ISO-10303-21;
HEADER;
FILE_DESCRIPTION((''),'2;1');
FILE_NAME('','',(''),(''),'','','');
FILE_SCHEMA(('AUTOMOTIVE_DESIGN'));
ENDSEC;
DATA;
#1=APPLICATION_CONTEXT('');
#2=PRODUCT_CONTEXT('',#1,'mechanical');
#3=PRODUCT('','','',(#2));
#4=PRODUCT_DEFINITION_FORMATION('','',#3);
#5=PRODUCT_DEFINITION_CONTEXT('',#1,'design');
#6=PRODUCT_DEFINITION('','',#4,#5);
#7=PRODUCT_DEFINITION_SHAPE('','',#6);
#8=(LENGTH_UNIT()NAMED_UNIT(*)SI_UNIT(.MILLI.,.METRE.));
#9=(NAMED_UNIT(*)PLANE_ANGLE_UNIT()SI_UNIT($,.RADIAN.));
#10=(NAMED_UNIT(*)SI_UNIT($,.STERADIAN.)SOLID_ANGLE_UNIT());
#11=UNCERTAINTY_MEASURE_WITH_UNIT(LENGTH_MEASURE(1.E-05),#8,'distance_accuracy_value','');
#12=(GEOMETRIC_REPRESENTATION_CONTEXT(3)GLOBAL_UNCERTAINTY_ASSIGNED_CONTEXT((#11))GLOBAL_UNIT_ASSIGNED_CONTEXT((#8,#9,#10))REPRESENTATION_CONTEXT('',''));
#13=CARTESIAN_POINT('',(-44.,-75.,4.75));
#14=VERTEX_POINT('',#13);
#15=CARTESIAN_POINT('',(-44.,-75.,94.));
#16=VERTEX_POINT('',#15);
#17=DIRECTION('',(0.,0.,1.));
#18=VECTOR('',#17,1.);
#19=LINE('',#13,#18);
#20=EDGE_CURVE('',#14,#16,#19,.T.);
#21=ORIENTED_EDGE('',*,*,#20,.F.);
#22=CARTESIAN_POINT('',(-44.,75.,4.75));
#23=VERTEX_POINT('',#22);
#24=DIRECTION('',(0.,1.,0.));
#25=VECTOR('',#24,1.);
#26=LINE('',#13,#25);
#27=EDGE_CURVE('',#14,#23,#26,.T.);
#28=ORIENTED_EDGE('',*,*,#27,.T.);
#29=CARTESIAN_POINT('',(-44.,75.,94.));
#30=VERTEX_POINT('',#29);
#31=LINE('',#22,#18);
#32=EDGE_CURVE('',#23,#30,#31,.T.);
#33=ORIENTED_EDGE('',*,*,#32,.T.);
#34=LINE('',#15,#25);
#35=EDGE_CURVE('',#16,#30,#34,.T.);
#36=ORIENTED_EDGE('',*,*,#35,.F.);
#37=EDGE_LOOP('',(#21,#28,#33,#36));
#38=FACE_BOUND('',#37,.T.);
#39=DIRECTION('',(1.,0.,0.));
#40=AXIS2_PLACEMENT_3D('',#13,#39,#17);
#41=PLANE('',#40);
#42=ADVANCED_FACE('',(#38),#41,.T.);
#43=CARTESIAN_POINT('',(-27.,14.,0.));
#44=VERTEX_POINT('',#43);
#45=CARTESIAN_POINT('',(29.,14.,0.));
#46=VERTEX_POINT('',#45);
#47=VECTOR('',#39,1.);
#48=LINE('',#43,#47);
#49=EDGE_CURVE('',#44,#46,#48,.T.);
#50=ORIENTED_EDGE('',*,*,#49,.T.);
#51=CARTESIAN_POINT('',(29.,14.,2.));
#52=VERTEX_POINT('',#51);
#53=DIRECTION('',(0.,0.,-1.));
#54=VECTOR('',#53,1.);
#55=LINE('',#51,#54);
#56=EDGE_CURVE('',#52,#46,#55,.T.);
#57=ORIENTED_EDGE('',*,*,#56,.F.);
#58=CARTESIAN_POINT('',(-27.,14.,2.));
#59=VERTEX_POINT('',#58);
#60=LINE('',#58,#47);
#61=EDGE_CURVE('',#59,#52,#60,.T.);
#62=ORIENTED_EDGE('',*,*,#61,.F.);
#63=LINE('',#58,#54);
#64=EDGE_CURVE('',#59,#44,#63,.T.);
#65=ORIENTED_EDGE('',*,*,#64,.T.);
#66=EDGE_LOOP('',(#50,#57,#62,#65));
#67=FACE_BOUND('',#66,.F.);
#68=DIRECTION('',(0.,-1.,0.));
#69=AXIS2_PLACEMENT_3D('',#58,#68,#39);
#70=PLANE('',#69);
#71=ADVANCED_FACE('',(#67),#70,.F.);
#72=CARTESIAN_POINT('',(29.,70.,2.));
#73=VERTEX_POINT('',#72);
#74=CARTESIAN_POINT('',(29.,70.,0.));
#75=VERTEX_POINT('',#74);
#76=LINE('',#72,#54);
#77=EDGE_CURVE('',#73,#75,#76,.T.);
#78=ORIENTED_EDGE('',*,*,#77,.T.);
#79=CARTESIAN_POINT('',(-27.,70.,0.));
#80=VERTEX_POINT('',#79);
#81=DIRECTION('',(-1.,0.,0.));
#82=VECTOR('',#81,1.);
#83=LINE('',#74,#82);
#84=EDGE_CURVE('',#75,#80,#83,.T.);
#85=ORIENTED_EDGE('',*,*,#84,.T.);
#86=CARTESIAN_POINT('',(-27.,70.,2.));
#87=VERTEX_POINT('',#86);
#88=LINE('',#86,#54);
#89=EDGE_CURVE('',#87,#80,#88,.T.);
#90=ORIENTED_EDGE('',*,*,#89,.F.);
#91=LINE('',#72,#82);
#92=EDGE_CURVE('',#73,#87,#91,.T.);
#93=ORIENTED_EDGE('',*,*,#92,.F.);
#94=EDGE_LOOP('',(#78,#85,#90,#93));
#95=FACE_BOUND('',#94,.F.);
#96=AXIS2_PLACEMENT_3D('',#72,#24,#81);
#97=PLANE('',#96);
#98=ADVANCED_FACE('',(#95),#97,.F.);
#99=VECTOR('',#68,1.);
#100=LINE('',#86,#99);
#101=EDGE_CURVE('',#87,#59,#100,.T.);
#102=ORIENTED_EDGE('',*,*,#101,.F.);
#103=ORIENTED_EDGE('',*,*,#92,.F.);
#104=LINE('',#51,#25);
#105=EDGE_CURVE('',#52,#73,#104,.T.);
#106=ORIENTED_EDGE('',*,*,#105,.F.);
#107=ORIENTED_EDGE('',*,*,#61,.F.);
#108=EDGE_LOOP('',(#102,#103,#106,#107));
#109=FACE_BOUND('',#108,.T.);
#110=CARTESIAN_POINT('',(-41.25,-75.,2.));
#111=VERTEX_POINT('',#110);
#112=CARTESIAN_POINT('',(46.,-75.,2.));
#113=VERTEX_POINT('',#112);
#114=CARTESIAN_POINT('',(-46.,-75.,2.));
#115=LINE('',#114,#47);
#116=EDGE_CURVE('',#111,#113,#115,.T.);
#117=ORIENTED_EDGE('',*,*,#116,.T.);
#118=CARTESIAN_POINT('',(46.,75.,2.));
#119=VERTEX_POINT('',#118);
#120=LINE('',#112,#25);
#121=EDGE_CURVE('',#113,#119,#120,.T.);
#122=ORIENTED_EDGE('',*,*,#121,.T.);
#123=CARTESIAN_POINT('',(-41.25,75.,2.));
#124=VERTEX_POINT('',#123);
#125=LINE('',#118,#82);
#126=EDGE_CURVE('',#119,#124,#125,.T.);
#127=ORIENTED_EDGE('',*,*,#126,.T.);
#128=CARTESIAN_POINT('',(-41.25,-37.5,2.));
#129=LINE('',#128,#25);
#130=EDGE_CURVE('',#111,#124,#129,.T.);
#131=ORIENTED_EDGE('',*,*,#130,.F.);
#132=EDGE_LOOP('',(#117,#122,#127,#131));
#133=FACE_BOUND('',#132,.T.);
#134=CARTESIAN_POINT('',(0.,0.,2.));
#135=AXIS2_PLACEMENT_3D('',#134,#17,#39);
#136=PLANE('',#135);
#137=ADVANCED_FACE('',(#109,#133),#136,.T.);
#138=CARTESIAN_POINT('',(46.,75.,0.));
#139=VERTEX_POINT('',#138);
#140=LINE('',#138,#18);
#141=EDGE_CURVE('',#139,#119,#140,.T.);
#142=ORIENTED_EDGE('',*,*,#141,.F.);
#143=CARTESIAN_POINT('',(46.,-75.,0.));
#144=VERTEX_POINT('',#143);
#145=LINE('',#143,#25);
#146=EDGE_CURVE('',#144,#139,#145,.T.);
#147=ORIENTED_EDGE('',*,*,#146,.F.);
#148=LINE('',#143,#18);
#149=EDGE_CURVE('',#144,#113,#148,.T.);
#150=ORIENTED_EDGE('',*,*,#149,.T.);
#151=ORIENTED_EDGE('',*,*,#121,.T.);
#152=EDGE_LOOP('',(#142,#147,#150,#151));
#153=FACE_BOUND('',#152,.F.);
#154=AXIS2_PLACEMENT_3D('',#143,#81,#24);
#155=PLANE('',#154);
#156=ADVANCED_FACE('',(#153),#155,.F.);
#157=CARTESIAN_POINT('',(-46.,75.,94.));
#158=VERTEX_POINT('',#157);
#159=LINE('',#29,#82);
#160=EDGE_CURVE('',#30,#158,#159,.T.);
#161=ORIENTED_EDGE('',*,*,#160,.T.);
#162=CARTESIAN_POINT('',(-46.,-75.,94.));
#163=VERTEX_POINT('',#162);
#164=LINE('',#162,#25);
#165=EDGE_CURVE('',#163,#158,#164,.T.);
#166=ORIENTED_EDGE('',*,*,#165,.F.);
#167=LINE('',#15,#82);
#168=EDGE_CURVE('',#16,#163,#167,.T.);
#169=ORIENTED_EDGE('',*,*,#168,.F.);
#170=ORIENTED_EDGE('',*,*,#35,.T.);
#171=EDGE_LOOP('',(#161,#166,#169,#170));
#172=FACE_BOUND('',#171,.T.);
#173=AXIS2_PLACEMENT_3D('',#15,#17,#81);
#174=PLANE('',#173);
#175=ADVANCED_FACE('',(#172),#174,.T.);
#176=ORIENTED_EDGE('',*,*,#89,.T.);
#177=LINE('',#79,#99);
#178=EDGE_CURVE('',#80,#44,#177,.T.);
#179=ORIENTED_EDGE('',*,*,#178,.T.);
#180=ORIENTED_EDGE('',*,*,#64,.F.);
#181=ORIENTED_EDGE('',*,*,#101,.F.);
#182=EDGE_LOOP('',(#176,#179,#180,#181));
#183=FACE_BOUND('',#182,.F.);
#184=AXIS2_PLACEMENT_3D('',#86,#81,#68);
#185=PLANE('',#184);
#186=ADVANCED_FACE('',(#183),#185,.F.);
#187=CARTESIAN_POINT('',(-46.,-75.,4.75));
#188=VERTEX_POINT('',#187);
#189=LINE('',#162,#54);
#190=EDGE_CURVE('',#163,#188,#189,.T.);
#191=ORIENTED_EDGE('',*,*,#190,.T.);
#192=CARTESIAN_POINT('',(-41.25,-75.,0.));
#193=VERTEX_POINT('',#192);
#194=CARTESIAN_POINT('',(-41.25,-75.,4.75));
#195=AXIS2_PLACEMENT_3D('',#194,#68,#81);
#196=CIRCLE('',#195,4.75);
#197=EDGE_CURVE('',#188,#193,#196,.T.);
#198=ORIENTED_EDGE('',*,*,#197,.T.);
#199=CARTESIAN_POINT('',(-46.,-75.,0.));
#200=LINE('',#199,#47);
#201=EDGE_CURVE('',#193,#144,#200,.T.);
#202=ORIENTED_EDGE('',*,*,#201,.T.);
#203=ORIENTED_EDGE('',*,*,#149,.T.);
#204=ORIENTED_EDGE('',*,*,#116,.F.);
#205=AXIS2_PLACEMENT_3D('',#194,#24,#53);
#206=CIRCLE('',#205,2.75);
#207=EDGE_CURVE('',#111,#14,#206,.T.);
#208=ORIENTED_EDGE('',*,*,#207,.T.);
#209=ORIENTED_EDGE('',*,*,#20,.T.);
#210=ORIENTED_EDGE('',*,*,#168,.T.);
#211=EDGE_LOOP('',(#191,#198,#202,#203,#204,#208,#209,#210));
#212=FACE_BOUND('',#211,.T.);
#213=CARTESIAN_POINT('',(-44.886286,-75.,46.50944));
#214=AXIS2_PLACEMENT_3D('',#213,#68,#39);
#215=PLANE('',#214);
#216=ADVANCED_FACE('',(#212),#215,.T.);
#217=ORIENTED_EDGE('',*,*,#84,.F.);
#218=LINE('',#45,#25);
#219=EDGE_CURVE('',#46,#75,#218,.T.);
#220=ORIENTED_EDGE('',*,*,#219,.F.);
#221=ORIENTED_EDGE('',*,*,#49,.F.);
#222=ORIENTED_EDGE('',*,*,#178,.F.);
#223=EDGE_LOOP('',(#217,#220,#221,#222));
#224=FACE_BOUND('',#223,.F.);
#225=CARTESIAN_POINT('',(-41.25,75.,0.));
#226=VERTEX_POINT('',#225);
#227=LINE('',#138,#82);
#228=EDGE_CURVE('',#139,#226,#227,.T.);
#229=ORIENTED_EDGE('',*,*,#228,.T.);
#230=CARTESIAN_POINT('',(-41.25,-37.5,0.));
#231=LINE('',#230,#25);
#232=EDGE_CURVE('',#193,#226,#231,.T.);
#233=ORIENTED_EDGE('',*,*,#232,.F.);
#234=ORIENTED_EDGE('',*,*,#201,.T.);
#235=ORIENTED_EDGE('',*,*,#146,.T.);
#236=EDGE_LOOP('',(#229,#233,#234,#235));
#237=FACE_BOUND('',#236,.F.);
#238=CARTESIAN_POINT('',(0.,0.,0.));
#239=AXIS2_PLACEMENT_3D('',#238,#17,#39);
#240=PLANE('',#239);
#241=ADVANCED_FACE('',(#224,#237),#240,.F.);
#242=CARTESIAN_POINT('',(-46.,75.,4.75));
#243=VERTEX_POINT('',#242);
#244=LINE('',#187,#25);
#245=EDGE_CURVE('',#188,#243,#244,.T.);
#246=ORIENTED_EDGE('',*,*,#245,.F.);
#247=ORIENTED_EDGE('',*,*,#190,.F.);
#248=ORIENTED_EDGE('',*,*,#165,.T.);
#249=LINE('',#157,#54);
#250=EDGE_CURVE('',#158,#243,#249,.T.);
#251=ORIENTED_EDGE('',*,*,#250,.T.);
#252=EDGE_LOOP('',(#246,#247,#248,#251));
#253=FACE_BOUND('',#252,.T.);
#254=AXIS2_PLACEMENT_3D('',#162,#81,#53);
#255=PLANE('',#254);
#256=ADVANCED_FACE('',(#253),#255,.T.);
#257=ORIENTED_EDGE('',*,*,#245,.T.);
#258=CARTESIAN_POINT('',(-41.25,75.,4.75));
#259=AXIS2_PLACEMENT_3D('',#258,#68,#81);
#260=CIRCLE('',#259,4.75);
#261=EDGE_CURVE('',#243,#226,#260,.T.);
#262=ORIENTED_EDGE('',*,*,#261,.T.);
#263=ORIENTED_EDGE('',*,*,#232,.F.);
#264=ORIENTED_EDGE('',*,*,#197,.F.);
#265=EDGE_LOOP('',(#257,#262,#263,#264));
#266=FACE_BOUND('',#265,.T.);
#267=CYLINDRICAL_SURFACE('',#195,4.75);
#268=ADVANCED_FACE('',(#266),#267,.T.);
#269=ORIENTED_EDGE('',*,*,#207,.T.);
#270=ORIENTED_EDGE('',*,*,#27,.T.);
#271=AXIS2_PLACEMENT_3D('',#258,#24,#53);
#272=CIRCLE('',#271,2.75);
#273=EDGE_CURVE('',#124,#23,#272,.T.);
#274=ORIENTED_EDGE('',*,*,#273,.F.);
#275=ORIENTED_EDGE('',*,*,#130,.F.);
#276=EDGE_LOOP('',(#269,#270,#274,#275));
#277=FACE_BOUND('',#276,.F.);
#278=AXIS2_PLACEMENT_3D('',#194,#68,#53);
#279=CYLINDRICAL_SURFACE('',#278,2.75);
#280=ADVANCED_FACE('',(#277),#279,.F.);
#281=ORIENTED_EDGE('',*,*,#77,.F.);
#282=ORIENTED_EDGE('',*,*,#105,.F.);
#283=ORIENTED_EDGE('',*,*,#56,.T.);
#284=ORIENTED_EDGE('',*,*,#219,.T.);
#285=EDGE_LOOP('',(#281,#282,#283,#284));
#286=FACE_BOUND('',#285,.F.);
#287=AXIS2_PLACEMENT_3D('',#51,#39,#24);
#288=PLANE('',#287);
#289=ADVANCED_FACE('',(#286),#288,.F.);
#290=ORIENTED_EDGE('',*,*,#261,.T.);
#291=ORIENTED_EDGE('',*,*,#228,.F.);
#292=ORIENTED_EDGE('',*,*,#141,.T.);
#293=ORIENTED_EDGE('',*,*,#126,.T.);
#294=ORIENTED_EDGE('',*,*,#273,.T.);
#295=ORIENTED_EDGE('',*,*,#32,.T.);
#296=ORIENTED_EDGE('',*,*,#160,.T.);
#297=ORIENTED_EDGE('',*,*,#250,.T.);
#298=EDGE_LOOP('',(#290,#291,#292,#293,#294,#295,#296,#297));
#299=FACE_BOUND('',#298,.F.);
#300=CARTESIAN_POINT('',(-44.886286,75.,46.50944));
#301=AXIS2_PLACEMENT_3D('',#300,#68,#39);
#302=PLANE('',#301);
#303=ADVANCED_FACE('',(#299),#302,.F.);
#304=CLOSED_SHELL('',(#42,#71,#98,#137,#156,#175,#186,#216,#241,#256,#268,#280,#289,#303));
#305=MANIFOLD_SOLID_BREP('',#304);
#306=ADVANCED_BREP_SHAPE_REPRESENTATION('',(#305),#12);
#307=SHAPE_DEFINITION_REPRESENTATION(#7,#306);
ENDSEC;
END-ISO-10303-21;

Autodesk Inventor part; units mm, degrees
ref_plane "YZ Plane" through (0, 0, 0) normal (1, 0, 0) x (0, 1, 0)
ref_plane "XZ Plane" through (0, 0, 0) normal (0, 1, 0) x (-1, 0, 0)
ref_plane "XY Plane" through (0, 0, 0) normal (0, 0, 1) x (1, 0, 0)
sketch "Sketch1" plane through (0, 0, 0) normal (0, 0, 1) x (1, 0, 0)
  line L0 (-46, -75) -> (46, -75)
  line L1 (46, -75) -> (46, 75)
  line L2 (46, 75) -> (-46, 75)
  line L3 (-46, 75) -> (-46, -75)
  line L4 (-46, -75) -> (46, 75) construction
  line L5 (46, -75) -> (-46, 75) construction
  point P0 (0, 0)
  dimension "d154" = 92
  dimension "d155" = 150
extrude "Plate5" add sketch "Sketch1" along normal blind 2
sketch "Sketch7" plane through (-44, -75, 0) normal (-1, 0, 0) x (0, -1, 0)
  line L0 (-150, 0) -> (0, 0)
  line L1 (0, 0) -> (0, 94)
  line L2 (0, 94) -> (-150, 94)
  line L3 (-150, 94) -> (-150, 0)
edge flange "Flange3" height 94 angle 90 thickness 2 bend radius 2.75 thickness toward (-1, 0, 0) relief round relief width 2 relief depth 1 edges at (-46, 0, 2) wall of the first edge with corners at (-44, 75, 0) (-44, -75, 0) (-44, -75, 94) (-44, 75, 94)
bend "Bend3"
corner "Corner3"
sketch "Sketch8" plane through (0, 0, 2) normal (0, 0, 1) x (1, 0, 0)
  line L0 (46, 75) -> (46, -75) projected
  line L1 (-41.25, 75) -> (46, 75) projected
  line L2 (29, 70) -> (-27, 70)
  line L3 (-27, 70) -> (-27, 14)
  line L4 (-27, 14) -> (29, 14)
  line L5 (29, 14) -> (29, 70)
  line L6 (29, 70) -> (-27, 14) construction
  line L7 (-27, 70) -> (29, 14) construction
  point P0 (0, 0)
  point P1 (1, 42)
  point P2 (2.375, 75)
  dimension "d167" = 56
  dimension "d168" = 56
  dimension "d169" = 5
  dimension "d172" = 17
extrude "Cut1" cut sketch "Sketch8" against normal blind 2
properties part number "APN 752 FDS 1200 FLANGE 2" material "Stainless Steel"
